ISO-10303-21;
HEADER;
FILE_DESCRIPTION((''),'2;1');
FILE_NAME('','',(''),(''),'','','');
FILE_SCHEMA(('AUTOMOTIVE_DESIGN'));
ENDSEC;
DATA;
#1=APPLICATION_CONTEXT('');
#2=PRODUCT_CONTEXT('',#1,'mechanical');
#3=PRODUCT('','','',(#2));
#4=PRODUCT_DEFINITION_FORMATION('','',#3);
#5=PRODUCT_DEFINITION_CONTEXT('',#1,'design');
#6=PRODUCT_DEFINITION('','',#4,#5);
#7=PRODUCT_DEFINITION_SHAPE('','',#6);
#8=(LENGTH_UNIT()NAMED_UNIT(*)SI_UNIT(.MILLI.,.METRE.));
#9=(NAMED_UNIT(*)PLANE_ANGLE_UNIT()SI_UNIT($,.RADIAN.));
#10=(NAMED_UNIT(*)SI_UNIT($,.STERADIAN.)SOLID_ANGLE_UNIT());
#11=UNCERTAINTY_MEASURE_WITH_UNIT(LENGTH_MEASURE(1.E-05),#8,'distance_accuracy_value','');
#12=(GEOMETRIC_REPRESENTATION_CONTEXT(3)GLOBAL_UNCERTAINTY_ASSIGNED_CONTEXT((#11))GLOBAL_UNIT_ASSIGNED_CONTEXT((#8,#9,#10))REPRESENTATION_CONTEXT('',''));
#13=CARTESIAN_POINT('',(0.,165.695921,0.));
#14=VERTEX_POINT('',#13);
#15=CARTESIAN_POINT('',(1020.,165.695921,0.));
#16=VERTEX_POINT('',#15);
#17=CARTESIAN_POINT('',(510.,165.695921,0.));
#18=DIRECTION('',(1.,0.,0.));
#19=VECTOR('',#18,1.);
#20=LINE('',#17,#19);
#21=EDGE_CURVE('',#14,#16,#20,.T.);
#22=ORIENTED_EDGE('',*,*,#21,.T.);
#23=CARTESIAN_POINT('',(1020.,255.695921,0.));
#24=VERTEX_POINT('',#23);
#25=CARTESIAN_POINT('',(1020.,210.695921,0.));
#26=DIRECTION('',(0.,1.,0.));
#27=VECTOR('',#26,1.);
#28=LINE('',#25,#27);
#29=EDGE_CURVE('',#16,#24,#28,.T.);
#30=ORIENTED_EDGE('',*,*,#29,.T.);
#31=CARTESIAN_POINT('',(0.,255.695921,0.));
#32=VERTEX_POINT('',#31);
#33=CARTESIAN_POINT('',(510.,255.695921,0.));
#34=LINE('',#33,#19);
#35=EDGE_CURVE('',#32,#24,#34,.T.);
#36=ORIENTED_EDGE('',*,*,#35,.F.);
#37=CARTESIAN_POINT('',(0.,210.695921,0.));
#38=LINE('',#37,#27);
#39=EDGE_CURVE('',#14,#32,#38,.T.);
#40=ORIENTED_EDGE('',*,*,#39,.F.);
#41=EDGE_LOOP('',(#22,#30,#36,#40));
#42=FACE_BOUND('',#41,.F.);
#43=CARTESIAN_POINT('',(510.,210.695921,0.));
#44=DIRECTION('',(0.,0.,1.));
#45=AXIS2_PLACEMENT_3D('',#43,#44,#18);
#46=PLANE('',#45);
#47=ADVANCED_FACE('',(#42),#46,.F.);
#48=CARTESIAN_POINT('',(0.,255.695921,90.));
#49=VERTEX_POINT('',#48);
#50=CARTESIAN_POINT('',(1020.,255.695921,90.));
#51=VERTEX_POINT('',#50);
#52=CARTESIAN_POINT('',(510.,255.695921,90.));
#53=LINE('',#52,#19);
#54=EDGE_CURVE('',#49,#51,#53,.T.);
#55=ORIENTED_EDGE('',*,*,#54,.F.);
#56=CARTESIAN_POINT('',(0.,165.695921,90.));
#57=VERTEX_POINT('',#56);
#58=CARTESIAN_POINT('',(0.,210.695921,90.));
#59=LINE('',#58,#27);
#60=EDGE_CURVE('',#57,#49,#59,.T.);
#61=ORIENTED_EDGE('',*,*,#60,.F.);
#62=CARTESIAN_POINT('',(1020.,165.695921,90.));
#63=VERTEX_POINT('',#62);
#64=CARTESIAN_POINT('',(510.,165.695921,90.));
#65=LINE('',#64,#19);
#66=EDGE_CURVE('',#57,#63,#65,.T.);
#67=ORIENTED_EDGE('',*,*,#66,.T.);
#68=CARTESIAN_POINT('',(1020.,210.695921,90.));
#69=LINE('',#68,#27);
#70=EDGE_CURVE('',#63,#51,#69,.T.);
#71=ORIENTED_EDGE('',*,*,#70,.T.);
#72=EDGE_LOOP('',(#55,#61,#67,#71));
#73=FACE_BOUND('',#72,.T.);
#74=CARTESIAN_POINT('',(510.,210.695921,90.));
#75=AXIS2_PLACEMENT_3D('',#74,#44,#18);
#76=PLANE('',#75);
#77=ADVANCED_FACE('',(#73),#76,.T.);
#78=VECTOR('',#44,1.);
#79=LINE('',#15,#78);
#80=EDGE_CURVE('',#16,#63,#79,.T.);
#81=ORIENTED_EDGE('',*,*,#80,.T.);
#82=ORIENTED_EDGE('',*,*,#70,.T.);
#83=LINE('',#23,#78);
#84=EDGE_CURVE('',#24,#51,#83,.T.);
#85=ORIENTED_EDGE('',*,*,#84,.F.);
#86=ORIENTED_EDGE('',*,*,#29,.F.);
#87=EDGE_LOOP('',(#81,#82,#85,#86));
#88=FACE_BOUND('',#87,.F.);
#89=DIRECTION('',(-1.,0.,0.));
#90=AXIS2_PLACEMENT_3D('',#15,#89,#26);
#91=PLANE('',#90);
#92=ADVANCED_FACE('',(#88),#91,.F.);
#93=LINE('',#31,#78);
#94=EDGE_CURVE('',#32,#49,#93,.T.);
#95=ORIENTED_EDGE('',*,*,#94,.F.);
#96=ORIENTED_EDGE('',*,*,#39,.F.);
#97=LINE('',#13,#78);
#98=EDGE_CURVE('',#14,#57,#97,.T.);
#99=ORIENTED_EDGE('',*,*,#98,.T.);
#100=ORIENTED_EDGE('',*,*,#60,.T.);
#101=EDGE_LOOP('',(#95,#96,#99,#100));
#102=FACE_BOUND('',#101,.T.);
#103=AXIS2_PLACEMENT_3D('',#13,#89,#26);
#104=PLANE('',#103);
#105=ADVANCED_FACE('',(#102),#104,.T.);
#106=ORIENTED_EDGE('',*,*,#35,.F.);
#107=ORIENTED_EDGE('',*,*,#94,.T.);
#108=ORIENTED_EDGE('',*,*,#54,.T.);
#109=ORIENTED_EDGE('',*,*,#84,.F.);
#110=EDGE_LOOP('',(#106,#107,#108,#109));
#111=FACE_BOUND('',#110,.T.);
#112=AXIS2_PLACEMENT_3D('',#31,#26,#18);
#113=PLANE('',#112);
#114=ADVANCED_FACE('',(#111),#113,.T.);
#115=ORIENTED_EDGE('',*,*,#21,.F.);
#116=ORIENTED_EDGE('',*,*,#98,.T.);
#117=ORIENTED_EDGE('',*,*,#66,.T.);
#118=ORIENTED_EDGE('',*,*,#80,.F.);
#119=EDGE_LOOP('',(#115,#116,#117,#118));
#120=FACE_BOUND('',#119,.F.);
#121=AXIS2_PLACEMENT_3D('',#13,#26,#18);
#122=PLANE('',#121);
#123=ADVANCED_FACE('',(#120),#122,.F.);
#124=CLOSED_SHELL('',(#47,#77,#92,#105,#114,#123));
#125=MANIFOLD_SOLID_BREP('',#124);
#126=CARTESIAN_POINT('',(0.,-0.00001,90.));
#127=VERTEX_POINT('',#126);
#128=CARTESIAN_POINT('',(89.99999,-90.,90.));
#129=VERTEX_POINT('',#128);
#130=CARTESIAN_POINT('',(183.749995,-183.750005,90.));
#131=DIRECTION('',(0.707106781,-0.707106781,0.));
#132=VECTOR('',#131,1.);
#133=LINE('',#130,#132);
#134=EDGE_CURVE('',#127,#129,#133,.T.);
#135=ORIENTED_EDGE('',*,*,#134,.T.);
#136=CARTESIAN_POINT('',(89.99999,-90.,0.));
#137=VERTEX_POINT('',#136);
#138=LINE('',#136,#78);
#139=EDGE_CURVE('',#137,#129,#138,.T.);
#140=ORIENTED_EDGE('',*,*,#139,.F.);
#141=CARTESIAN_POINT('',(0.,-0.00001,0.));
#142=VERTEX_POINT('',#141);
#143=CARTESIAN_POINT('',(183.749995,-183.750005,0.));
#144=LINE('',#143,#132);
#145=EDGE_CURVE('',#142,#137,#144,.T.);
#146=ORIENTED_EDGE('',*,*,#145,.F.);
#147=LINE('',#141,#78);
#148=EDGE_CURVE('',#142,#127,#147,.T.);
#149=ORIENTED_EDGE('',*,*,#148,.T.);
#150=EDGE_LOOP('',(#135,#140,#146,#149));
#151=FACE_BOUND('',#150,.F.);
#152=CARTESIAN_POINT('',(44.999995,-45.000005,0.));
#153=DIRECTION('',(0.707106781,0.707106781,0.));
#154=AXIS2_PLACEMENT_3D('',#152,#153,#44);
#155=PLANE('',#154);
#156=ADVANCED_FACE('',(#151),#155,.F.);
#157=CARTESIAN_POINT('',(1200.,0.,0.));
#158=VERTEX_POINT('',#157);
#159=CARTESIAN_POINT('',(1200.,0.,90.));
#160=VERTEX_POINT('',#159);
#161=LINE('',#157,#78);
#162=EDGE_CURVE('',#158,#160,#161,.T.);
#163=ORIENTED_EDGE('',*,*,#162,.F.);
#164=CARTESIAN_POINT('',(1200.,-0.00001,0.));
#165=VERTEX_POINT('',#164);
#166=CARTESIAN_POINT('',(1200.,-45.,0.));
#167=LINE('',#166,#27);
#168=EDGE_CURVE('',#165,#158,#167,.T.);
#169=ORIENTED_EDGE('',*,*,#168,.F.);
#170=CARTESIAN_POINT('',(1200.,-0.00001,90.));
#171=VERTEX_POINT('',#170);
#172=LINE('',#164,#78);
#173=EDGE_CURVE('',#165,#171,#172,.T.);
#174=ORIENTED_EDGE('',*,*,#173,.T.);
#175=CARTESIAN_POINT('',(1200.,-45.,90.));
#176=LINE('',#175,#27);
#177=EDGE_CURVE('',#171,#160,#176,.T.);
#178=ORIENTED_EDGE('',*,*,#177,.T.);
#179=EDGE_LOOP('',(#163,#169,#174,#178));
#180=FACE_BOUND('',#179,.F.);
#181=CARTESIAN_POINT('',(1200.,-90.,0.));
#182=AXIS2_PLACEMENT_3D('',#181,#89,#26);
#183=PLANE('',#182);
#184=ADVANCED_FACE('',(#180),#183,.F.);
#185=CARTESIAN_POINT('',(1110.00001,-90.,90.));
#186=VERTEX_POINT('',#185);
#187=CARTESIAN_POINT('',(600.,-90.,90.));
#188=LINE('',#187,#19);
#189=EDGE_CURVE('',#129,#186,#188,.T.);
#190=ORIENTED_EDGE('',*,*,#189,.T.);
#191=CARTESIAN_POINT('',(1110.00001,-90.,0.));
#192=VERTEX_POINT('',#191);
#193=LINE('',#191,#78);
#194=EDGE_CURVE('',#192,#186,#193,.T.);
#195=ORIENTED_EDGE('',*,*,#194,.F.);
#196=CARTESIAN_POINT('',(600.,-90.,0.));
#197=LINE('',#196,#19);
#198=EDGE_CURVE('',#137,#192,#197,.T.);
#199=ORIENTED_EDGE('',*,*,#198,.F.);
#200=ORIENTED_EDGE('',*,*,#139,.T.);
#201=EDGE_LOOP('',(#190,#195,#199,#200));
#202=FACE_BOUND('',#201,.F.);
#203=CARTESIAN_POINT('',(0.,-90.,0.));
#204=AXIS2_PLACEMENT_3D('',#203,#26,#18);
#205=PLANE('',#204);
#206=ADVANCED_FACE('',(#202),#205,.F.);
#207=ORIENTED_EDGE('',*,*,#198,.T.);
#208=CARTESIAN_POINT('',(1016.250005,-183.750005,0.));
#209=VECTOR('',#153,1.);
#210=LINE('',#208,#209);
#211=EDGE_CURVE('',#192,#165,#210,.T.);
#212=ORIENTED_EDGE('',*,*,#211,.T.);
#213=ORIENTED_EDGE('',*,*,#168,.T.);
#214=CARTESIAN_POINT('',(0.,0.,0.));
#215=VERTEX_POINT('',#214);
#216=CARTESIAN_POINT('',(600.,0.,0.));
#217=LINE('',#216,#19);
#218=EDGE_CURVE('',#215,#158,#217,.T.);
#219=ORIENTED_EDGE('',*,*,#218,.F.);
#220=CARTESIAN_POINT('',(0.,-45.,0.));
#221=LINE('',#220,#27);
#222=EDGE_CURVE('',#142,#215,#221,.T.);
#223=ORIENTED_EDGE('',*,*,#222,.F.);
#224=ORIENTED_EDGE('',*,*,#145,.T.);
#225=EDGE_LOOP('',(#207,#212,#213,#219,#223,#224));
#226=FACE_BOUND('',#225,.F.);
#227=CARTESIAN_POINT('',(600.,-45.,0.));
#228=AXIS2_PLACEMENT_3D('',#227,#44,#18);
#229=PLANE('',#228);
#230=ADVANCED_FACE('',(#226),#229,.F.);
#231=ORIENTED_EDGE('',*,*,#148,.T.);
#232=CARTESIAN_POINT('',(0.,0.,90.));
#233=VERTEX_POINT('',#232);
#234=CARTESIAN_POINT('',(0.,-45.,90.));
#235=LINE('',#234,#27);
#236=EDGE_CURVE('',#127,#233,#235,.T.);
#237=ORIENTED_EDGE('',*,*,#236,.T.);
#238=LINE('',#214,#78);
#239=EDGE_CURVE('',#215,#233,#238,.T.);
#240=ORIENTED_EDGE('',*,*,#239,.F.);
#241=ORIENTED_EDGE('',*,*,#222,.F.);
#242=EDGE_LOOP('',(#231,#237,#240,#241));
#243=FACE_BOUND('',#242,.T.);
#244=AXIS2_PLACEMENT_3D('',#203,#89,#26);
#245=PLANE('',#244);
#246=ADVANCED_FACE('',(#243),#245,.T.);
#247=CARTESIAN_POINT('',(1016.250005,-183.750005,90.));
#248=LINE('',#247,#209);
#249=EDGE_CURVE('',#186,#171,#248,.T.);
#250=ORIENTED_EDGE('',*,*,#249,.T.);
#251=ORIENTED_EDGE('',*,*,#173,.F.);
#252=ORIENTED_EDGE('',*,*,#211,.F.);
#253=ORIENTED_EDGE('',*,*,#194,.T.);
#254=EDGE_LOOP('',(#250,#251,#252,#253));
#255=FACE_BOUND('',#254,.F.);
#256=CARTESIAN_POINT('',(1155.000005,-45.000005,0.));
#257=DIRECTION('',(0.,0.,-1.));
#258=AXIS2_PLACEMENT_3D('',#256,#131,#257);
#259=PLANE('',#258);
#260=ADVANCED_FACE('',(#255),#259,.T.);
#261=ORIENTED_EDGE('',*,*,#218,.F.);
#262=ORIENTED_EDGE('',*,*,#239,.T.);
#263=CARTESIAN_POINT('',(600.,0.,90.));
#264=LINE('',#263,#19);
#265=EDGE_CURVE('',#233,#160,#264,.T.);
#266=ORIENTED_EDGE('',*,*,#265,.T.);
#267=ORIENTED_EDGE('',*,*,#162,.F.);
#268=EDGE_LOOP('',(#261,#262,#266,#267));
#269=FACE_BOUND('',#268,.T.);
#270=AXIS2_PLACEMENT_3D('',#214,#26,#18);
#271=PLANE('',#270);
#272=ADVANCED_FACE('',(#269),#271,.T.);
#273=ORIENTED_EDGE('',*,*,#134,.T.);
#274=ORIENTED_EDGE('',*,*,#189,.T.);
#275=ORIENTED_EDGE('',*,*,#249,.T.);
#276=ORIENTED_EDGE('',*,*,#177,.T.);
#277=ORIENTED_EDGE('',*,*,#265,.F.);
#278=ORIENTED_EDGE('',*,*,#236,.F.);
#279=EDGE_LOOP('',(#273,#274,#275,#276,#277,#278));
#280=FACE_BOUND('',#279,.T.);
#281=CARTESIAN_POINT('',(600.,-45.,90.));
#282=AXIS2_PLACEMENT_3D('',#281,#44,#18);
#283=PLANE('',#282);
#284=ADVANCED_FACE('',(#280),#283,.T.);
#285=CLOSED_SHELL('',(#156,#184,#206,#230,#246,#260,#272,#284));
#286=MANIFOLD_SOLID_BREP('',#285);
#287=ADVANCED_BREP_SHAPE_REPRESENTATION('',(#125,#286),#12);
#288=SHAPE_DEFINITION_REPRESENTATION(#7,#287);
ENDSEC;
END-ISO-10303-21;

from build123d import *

# Parameters (mm, degrees)
F0_W     = 1200
F0_H     = 90
F1_DEPTH = 90
F2_SIZE  = 89.99999
F3_W     = 1020
F3_H     = 90
F4_DEPTH = 90


# Not quite as in the source:
# - a fillet or chamfer is up to 0.001 mm smaller than in the source, because OpenCascade refuses the exact size


with BuildPart() as f1:
    # F0 (on Top) → F1 (new body)
    with BuildSketch(Plane.XY):
        with Locations((600, -45)):
            Rectangle(F0_W, F0_H)
    extrude(amount=F1_DEPTH)

    # F2 (size 90 in the source; OpenCascade refuses exactly that, so slightly less here)
    f2_edges = [f1.edges().sort_by_distance(p)[0] for p in [
        (1200, -90, 45),
        (0, -90, 45),
    ]]
    chamfer(f2_edges, length=F2_SIZE)


with BuildPart() as f4:
    # F3 (on Top) → F4 (new body)
    with BuildSketch(Plane.XY):
        with Locations((510, 210.6959205866)):
            Rectangle(F3_W, F3_H)
    extrude(amount=F4_DEPTH)


solid = Compound([f1.part, f4.part])
